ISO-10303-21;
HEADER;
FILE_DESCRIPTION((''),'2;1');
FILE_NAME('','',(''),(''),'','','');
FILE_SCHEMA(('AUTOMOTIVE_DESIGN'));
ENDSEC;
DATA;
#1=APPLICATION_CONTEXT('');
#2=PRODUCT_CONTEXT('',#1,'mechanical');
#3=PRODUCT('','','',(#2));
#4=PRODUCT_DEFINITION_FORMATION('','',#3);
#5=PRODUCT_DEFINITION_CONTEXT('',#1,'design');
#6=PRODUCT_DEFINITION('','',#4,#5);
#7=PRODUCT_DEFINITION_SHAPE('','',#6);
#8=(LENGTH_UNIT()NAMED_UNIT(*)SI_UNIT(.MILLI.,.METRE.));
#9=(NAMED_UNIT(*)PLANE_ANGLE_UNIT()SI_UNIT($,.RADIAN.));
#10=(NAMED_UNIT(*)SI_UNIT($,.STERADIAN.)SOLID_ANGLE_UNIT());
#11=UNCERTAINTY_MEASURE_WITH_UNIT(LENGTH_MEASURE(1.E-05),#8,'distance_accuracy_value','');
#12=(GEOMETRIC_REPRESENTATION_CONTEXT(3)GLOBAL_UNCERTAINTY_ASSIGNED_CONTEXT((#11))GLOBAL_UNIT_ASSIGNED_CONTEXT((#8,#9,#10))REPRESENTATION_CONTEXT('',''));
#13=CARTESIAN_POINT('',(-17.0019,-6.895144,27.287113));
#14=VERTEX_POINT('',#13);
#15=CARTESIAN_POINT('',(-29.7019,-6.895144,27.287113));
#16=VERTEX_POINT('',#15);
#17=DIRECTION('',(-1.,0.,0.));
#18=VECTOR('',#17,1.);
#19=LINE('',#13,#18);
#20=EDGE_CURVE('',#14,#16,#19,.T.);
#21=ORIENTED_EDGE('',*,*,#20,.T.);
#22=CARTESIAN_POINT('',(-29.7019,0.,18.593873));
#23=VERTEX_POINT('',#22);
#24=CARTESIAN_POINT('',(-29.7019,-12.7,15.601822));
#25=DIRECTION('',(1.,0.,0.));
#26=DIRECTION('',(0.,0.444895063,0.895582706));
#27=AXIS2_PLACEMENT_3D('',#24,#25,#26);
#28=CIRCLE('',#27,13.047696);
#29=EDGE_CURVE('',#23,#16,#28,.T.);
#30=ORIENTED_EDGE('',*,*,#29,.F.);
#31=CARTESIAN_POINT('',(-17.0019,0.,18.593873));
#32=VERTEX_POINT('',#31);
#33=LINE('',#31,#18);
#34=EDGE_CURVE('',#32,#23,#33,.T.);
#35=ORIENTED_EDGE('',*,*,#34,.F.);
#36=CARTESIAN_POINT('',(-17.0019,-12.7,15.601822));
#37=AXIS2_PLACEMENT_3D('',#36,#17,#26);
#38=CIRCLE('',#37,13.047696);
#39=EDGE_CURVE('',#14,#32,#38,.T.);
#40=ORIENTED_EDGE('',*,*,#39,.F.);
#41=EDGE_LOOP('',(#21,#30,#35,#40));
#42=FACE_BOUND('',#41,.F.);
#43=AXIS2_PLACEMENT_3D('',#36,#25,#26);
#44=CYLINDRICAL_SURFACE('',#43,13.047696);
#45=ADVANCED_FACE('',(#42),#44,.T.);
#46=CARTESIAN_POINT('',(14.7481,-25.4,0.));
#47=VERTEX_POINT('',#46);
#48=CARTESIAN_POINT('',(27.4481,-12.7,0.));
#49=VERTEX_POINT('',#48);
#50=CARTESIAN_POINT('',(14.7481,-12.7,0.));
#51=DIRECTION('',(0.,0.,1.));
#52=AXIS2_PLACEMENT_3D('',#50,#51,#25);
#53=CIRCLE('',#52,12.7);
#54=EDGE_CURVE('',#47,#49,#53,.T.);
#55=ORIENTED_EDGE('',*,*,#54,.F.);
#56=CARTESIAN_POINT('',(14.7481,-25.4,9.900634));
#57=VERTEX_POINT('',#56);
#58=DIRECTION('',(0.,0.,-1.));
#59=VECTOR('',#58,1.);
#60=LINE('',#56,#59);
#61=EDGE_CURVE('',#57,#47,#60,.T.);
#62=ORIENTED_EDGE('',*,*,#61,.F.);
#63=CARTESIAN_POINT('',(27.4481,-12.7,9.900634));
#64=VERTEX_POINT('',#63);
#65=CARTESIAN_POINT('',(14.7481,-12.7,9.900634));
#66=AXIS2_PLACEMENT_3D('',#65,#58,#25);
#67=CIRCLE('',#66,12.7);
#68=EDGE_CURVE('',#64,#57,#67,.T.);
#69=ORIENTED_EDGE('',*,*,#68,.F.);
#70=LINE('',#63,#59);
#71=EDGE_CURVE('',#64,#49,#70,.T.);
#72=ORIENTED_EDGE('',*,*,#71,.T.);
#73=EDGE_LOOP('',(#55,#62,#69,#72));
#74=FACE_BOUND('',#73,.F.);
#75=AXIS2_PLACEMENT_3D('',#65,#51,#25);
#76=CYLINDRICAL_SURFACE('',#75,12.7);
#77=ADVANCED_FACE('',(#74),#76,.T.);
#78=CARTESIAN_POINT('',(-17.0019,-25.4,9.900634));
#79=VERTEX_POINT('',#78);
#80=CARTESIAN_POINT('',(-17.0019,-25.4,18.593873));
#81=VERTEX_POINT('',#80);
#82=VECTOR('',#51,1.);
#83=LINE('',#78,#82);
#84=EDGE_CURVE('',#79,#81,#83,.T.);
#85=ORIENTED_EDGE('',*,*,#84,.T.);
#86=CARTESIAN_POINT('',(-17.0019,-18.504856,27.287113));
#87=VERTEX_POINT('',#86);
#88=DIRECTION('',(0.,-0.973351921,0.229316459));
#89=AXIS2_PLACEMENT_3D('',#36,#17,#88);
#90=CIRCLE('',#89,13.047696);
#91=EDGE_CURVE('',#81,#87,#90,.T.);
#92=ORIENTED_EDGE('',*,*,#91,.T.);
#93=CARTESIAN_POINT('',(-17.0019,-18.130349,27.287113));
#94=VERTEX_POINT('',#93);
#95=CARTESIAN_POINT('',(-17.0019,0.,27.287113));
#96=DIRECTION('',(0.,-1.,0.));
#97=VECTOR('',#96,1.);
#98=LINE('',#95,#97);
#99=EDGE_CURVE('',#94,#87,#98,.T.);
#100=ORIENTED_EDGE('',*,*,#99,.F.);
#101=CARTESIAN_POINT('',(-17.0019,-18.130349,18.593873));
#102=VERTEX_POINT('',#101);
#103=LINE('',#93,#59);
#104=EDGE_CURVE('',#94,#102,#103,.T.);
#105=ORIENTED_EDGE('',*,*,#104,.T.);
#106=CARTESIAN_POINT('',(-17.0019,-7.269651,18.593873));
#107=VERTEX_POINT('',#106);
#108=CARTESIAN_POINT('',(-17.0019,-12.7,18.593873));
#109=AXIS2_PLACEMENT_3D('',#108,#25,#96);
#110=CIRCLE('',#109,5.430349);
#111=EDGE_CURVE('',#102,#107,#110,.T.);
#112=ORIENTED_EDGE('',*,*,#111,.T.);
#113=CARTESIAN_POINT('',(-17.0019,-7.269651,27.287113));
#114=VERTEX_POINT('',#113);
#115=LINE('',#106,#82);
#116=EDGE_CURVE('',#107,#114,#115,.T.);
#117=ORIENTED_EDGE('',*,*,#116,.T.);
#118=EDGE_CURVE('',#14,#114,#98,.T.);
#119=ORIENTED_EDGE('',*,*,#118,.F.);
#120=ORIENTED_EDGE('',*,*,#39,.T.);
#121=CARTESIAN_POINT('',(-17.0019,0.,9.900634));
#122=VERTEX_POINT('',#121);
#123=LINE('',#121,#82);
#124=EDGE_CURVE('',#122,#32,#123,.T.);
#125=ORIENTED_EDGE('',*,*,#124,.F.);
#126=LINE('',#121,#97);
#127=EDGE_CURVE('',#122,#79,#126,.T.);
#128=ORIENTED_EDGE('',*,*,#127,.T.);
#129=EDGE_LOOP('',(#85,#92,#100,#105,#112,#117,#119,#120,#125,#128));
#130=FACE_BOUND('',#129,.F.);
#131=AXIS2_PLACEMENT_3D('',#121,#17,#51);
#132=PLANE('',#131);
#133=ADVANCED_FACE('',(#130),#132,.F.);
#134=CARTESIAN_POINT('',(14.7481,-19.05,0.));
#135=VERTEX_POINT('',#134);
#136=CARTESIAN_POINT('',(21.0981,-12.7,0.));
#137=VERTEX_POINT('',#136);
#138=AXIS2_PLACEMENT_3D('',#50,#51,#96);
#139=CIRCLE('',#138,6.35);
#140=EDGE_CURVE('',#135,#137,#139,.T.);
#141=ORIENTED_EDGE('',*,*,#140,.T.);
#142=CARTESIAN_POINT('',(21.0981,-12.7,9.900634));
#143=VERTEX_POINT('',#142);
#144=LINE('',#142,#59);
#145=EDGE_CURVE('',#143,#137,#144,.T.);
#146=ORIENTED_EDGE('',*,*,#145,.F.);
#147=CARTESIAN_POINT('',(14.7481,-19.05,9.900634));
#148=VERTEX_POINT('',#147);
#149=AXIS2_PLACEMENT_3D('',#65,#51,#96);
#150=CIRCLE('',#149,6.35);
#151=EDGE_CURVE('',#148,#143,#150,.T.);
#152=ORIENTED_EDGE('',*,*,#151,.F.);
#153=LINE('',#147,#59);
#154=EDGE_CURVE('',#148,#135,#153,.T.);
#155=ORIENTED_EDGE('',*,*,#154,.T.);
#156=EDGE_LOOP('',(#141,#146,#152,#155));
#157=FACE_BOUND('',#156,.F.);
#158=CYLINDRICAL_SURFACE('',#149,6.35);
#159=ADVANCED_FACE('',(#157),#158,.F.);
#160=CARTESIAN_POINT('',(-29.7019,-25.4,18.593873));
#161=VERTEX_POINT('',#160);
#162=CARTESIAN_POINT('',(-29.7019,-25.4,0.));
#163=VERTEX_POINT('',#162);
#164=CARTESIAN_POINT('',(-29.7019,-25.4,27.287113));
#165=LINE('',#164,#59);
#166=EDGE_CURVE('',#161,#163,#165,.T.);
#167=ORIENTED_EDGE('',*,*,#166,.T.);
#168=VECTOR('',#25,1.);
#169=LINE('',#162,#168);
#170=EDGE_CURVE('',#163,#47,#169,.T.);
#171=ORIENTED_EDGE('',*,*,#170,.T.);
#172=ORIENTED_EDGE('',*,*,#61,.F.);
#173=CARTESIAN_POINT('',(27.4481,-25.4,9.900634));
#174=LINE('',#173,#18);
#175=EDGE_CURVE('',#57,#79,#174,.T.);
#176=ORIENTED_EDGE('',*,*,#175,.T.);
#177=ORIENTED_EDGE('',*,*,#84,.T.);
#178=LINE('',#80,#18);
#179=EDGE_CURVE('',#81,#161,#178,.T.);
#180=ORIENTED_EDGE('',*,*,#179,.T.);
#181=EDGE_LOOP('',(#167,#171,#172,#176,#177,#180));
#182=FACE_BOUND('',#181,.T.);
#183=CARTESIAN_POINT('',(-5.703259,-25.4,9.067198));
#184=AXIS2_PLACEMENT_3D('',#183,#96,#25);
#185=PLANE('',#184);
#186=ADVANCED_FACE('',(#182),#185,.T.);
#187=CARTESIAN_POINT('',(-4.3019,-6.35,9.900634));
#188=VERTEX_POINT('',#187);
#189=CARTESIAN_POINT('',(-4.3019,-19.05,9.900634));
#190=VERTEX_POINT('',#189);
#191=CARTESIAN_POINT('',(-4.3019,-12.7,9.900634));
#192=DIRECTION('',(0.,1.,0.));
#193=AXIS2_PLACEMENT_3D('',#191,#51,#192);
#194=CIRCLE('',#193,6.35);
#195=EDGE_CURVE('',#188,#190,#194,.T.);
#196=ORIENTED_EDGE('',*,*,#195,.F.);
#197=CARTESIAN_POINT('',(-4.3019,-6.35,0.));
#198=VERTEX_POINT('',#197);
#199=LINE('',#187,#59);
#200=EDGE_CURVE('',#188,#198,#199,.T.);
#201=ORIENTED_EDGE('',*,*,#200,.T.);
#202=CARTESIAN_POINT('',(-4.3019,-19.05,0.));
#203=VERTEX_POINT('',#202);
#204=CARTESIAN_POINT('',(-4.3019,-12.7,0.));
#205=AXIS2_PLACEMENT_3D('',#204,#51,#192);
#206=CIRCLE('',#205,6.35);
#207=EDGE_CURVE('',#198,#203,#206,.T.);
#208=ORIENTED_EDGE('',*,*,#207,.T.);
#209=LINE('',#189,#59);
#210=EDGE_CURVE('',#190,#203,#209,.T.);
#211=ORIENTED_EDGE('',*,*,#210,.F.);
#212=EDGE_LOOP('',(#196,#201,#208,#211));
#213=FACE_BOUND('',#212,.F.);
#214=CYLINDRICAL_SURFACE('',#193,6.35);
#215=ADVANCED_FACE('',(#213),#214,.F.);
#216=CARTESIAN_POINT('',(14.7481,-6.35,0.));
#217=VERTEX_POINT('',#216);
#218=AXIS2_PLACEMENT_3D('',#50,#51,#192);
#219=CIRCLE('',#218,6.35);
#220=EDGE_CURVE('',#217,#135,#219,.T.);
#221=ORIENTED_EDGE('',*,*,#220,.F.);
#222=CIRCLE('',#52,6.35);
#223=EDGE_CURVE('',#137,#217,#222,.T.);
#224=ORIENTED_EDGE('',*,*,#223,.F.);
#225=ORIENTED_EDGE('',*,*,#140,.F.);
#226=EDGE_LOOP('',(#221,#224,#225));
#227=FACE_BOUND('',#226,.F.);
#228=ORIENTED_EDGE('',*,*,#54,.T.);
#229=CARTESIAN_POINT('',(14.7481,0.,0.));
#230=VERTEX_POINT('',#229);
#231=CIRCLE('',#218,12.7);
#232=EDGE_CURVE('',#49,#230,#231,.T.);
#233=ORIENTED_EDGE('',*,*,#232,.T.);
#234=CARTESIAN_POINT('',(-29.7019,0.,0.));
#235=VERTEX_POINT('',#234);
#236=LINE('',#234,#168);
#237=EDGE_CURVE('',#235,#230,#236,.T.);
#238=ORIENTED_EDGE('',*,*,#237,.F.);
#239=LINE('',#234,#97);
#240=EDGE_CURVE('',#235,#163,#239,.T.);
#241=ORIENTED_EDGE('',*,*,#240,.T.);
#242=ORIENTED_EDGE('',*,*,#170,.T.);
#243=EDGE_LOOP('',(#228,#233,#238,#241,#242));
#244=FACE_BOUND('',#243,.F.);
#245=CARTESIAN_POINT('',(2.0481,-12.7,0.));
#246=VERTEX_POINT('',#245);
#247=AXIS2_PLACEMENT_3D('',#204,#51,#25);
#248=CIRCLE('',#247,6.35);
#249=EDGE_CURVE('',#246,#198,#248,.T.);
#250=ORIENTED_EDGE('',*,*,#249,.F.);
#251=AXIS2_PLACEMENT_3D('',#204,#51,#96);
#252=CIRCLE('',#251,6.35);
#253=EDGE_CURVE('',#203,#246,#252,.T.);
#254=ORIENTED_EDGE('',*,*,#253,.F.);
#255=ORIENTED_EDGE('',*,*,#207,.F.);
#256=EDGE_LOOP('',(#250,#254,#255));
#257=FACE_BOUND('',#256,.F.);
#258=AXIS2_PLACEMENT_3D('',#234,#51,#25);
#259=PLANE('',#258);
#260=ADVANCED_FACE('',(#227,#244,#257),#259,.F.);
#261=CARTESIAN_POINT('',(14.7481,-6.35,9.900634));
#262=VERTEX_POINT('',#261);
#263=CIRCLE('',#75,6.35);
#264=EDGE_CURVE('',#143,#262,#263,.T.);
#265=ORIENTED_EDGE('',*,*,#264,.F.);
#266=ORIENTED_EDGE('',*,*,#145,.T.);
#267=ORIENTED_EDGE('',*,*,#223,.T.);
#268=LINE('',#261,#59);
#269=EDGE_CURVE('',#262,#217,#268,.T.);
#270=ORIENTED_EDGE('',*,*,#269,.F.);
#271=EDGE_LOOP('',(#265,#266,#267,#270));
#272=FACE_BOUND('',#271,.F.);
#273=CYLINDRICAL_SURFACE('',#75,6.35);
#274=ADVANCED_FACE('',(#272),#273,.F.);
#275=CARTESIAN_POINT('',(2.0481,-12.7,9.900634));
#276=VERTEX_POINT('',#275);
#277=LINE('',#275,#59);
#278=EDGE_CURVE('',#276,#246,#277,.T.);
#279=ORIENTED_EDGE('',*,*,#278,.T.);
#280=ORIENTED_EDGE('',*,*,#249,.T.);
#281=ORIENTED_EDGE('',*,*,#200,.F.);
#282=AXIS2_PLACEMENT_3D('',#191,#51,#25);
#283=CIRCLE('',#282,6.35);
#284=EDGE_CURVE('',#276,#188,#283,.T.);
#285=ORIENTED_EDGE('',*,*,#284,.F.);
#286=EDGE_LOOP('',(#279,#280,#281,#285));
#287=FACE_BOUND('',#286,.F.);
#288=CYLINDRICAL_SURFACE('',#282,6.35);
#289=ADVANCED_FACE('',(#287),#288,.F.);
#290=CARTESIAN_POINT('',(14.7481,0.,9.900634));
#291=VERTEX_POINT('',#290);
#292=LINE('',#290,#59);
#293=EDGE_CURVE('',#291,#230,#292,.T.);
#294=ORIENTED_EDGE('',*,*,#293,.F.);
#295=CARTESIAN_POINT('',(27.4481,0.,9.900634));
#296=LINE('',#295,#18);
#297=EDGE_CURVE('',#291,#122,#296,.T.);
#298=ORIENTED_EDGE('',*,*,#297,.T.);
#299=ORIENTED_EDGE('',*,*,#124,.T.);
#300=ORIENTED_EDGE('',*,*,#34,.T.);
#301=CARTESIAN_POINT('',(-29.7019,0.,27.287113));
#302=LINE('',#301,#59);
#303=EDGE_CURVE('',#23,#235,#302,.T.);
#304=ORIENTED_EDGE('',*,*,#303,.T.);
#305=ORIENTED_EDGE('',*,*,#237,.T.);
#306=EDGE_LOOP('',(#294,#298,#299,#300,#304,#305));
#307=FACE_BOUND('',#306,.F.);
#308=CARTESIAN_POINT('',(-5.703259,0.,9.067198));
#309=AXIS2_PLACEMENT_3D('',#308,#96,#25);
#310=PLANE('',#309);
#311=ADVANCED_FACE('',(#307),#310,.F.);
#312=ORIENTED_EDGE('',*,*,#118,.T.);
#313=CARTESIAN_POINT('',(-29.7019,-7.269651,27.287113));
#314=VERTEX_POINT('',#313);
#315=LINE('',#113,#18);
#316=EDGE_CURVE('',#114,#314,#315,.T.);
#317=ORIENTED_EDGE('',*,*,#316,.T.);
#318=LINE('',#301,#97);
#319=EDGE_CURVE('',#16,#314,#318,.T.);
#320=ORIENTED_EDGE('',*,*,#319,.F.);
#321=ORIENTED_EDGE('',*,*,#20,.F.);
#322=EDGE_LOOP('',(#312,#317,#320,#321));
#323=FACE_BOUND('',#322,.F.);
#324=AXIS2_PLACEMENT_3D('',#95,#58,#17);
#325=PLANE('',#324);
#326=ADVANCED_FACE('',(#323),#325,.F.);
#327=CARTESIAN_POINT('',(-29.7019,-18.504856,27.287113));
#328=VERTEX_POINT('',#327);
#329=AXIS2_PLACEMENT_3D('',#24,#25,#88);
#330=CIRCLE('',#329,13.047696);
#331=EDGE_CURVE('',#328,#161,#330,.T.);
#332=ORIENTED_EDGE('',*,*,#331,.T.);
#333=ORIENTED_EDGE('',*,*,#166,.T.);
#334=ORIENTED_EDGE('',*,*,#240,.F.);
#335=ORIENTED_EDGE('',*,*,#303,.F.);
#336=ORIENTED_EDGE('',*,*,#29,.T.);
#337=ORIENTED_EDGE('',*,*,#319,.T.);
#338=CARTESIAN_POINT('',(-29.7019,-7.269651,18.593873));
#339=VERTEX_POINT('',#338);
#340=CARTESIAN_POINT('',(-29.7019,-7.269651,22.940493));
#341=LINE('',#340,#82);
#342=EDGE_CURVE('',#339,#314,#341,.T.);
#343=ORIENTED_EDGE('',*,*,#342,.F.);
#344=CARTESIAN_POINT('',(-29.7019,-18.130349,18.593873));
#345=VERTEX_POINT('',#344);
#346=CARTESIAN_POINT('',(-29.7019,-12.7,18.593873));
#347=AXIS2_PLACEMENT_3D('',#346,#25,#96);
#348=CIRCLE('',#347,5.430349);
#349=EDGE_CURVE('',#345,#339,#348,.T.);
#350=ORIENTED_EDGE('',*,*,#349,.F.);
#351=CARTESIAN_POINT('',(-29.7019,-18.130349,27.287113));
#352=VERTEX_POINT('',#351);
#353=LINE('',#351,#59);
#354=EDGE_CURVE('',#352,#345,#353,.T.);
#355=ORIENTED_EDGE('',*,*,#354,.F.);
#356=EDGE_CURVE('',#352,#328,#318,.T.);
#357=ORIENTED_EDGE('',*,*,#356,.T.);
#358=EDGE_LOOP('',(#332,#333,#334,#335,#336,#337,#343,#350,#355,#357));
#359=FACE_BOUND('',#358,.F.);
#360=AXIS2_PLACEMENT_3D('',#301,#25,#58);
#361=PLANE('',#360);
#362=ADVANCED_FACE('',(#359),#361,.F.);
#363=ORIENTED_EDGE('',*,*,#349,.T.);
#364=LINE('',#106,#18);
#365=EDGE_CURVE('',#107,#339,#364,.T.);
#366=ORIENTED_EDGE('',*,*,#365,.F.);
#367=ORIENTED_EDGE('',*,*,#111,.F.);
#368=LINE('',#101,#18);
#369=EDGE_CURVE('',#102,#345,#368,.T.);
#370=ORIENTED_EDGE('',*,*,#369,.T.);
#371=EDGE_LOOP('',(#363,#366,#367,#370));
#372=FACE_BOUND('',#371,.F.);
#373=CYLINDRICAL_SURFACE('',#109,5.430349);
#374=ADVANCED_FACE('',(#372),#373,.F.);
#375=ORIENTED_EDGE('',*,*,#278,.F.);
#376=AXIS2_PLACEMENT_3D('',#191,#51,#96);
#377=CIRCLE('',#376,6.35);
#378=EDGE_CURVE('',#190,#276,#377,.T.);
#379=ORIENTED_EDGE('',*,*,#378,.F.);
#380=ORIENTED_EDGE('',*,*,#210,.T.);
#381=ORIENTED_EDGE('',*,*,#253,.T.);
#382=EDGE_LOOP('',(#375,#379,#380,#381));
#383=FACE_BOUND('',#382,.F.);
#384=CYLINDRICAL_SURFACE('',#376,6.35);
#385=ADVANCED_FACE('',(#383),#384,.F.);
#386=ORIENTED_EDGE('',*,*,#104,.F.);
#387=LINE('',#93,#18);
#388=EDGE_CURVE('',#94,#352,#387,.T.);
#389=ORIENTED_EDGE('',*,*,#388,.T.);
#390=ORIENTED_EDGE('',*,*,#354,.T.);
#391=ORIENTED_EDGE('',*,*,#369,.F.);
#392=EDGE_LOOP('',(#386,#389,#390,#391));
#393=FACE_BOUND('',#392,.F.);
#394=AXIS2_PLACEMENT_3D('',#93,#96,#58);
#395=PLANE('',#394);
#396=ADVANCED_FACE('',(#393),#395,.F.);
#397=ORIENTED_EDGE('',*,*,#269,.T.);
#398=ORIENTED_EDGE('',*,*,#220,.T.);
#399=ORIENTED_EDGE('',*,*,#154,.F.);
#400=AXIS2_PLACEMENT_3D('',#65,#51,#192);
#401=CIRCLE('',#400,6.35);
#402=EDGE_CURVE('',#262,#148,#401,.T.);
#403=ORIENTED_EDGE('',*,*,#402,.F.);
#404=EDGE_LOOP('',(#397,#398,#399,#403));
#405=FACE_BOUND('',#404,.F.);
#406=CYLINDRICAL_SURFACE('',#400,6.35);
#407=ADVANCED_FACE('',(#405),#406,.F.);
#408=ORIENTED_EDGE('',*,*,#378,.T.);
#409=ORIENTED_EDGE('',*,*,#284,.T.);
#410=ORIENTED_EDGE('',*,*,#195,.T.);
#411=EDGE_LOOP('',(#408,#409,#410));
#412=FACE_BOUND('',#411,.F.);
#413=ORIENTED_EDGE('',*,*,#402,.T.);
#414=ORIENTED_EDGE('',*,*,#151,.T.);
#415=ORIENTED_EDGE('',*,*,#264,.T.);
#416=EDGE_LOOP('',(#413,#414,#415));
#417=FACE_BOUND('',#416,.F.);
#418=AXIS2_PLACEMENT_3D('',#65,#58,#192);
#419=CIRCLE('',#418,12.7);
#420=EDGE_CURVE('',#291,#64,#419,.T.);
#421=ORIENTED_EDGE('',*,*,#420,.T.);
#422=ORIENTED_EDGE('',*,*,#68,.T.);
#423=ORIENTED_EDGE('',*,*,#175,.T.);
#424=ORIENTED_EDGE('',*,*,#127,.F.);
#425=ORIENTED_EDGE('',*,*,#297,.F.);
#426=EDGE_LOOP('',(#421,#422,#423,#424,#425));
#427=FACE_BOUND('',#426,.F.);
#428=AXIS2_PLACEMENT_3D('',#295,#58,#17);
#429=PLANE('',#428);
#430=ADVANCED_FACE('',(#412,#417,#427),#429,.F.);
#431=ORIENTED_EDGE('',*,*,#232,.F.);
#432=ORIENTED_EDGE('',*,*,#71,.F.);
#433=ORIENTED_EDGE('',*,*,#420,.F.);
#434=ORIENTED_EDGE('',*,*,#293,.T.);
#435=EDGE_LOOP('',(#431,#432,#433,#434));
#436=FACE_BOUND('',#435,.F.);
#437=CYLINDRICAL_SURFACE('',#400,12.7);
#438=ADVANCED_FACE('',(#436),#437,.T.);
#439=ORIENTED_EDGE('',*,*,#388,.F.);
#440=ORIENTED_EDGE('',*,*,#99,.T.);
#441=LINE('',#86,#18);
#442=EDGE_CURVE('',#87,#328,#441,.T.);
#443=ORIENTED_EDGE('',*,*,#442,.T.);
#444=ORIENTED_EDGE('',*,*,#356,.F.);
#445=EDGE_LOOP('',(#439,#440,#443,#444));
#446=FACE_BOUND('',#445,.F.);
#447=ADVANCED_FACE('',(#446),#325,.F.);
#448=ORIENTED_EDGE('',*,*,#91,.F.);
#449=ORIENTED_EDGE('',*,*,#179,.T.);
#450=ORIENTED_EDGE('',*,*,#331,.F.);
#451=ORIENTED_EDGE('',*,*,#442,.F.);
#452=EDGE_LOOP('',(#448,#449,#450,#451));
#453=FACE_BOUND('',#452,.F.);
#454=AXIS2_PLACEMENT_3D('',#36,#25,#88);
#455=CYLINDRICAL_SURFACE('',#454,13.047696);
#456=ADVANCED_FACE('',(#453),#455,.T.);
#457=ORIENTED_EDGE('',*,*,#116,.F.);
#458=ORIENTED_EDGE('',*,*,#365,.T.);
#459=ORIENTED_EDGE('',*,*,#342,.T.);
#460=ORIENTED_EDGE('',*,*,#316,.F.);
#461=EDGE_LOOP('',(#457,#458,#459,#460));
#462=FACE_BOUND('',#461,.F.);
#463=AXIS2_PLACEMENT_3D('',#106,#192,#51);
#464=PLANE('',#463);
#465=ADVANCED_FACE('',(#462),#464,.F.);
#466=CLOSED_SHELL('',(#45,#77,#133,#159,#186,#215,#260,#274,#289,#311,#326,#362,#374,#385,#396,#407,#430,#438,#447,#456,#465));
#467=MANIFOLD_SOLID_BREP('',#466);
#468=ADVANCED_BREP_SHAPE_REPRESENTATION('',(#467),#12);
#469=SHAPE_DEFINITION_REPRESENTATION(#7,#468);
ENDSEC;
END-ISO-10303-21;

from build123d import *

# Parameters (mm, degrees)
F1_DEPTH = 25.4
F3_DEPTH = 12.701
F5_DEPTH = 9.9016336957


with BuildPart() as f1:
    # F0 (on Front) → F1 (new body)
    with BuildSketch(Plane.XZ):
        Polygon((-29.7019003412, 0), (27.4480996588, 0), (27.4480996588, 9.9006336957), (-17.0019003412, 9.9006336957), (-17.0019003412, 27.2871126172), (-29.7019003412, 27.2871126172), align=None)
    extrude(amount=F1_DEPTH)

    # F2 (on face) → F3 (cut, through all)
    with BuildSketch(Plane.YZ.offset(-17.0019003412)):
        with BuildLine():
            Line((-25.4, 27.2871126172), (-25.4, 18.5938731565))
            ThreePointArc((-25.4, 18.5938731565), (-22.9225497247, 23.7099564427), (-18.5048555567, 27.2871126172))
            Line((-18.5048555567, 27.2871126172), (-25.4, 27.2871126172))
        make_face()
        with BuildLine():
            ThreePointArc((-7.2696510886, 18.5938731565), (-12.7, 24.0242220678), (-18.1303489114, 18.5938731565))
            Line((-18.1303489114, 18.5938731565), (-7.2696510886, 18.5938731565))
        make_face()
        with BuildLine():
            Line((-18.1303489114, 27.2871126172), (-18.1303489114, 18.5938731565))
            ThreePointArc((-18.1303489114, 18.5938731565), (-12.7, 24.0242220678), (-7.2696510886, 18.5938731565))
            Line((-7.2696510886, 18.5938731565), (-7.2696510886, 27.2871126172))
            Line((-7.2696510886, 27.2871126172), (-18.1303489114, 27.2871126172))
        make_face()
        with BuildLine():
            Line((-7.2696510886, 18.5938731565), (-18.1303489114, 18.5938731565))
            ThreePointArc((-18.1303489114, 18.5938731565), (-12.7, 13.1635242451), (-7.2696510886, 18.5938731565))
        make_face()
        with BuildLine():
            ThreePointArc((-6.8951444433, 27.2871126172), (-12.7, 28.6495177359), (-18.5048555567, 27.2871126172))
            Line((-18.5048555567, 27.2871126172), (-18.1303489114, 27.2871126172))
            Line((-18.1303489114, 27.2871126172), (-7.2696510886, 27.2871126172))
            Line((-7.2696510886, 27.2871126172), (-6.8951444433, 27.2871126172))
        make_face()
        with BuildLine():
            Line((0, 27.2871126172), (-6.8951444433, 27.2871126172))
            ThreePointArc((-6.8951444433, 27.2871126172), (-2.4774502753, 23.7099564427), (0, 18.5938731565))
            Line((0, 18.5938731565), (0, 27.2871126172))
        make_face()
    extrude(amount=-F3_DEPTH, mode=Mode.SUBTRACT)

    # F4 (on face) → F5 (cut, through all)
    with BuildSketch(Plane.XY.offset(9.9006336957)):
        with BuildLine():
            Line((14.7480996588, -19.05), (14.7480996588, -6.35))
            ThreePointArc((14.7480996588, -6.35), (8.3980996588, -12.7), (14.7480996588, -19.05))
        make_face()
        with BuildLine():
            ThreePointArc((21.0980996588, -12.7), (19.2382277193, -8.2098719395), (14.7480996588, -6.35))
            Line((14.7480996588, -6.35), (14.7480996588, -19.05))
            ThreePointArc((14.7480996588, -19.05), (19.2382277193, -17.1901280605), (21.0980996588, -12.7))
        make_face()
        with BuildLine():
            Line((-4.3019003412, -19.05), (-4.3019003412, -6.35))
            ThreePointArc((-4.3019003412, -6.35), (-10.6519003412, -12.7), (-4.3019003412, -19.05))
        make_face()
        with BuildLine():
            ThreePointArc((2.0480996588, -12.7), (0.1882277193, -8.2098719395), (-4.3019003412, -6.35))
            Line((-4.3019003412, -6.35), (-4.3019003412, -19.05))
            ThreePointArc((-4.3019003412, -19.05), (0.1882277193, -17.1901280605), (2.0480996588, -12.7))
        make_face()
        with BuildLine():
            Line((27.4480996588, 0), (14.7480996588, 0))
            ThreePointArc((14.7480996588, 0), (23.7283557799, -3.7197438789), (27.4480996588, -12.7))
            Line((27.4480996588, -12.7), (27.4480996588, 0))
        make_face()
        with BuildLine():
            Line((27.4480996588, -25.4), (27.4480996588, -12.7))
            ThreePointArc((27.4480996588, -12.7), (23.7283557799, -21.6802561211), (14.7480996588, -25.4))
            Line((14.7480996588, -25.4), (27.4480996588, -25.4))
        make_face()
    extrude(amount=-F5_DEPTH, mode=Mode.SUBTRACT)


solid = f1.part
